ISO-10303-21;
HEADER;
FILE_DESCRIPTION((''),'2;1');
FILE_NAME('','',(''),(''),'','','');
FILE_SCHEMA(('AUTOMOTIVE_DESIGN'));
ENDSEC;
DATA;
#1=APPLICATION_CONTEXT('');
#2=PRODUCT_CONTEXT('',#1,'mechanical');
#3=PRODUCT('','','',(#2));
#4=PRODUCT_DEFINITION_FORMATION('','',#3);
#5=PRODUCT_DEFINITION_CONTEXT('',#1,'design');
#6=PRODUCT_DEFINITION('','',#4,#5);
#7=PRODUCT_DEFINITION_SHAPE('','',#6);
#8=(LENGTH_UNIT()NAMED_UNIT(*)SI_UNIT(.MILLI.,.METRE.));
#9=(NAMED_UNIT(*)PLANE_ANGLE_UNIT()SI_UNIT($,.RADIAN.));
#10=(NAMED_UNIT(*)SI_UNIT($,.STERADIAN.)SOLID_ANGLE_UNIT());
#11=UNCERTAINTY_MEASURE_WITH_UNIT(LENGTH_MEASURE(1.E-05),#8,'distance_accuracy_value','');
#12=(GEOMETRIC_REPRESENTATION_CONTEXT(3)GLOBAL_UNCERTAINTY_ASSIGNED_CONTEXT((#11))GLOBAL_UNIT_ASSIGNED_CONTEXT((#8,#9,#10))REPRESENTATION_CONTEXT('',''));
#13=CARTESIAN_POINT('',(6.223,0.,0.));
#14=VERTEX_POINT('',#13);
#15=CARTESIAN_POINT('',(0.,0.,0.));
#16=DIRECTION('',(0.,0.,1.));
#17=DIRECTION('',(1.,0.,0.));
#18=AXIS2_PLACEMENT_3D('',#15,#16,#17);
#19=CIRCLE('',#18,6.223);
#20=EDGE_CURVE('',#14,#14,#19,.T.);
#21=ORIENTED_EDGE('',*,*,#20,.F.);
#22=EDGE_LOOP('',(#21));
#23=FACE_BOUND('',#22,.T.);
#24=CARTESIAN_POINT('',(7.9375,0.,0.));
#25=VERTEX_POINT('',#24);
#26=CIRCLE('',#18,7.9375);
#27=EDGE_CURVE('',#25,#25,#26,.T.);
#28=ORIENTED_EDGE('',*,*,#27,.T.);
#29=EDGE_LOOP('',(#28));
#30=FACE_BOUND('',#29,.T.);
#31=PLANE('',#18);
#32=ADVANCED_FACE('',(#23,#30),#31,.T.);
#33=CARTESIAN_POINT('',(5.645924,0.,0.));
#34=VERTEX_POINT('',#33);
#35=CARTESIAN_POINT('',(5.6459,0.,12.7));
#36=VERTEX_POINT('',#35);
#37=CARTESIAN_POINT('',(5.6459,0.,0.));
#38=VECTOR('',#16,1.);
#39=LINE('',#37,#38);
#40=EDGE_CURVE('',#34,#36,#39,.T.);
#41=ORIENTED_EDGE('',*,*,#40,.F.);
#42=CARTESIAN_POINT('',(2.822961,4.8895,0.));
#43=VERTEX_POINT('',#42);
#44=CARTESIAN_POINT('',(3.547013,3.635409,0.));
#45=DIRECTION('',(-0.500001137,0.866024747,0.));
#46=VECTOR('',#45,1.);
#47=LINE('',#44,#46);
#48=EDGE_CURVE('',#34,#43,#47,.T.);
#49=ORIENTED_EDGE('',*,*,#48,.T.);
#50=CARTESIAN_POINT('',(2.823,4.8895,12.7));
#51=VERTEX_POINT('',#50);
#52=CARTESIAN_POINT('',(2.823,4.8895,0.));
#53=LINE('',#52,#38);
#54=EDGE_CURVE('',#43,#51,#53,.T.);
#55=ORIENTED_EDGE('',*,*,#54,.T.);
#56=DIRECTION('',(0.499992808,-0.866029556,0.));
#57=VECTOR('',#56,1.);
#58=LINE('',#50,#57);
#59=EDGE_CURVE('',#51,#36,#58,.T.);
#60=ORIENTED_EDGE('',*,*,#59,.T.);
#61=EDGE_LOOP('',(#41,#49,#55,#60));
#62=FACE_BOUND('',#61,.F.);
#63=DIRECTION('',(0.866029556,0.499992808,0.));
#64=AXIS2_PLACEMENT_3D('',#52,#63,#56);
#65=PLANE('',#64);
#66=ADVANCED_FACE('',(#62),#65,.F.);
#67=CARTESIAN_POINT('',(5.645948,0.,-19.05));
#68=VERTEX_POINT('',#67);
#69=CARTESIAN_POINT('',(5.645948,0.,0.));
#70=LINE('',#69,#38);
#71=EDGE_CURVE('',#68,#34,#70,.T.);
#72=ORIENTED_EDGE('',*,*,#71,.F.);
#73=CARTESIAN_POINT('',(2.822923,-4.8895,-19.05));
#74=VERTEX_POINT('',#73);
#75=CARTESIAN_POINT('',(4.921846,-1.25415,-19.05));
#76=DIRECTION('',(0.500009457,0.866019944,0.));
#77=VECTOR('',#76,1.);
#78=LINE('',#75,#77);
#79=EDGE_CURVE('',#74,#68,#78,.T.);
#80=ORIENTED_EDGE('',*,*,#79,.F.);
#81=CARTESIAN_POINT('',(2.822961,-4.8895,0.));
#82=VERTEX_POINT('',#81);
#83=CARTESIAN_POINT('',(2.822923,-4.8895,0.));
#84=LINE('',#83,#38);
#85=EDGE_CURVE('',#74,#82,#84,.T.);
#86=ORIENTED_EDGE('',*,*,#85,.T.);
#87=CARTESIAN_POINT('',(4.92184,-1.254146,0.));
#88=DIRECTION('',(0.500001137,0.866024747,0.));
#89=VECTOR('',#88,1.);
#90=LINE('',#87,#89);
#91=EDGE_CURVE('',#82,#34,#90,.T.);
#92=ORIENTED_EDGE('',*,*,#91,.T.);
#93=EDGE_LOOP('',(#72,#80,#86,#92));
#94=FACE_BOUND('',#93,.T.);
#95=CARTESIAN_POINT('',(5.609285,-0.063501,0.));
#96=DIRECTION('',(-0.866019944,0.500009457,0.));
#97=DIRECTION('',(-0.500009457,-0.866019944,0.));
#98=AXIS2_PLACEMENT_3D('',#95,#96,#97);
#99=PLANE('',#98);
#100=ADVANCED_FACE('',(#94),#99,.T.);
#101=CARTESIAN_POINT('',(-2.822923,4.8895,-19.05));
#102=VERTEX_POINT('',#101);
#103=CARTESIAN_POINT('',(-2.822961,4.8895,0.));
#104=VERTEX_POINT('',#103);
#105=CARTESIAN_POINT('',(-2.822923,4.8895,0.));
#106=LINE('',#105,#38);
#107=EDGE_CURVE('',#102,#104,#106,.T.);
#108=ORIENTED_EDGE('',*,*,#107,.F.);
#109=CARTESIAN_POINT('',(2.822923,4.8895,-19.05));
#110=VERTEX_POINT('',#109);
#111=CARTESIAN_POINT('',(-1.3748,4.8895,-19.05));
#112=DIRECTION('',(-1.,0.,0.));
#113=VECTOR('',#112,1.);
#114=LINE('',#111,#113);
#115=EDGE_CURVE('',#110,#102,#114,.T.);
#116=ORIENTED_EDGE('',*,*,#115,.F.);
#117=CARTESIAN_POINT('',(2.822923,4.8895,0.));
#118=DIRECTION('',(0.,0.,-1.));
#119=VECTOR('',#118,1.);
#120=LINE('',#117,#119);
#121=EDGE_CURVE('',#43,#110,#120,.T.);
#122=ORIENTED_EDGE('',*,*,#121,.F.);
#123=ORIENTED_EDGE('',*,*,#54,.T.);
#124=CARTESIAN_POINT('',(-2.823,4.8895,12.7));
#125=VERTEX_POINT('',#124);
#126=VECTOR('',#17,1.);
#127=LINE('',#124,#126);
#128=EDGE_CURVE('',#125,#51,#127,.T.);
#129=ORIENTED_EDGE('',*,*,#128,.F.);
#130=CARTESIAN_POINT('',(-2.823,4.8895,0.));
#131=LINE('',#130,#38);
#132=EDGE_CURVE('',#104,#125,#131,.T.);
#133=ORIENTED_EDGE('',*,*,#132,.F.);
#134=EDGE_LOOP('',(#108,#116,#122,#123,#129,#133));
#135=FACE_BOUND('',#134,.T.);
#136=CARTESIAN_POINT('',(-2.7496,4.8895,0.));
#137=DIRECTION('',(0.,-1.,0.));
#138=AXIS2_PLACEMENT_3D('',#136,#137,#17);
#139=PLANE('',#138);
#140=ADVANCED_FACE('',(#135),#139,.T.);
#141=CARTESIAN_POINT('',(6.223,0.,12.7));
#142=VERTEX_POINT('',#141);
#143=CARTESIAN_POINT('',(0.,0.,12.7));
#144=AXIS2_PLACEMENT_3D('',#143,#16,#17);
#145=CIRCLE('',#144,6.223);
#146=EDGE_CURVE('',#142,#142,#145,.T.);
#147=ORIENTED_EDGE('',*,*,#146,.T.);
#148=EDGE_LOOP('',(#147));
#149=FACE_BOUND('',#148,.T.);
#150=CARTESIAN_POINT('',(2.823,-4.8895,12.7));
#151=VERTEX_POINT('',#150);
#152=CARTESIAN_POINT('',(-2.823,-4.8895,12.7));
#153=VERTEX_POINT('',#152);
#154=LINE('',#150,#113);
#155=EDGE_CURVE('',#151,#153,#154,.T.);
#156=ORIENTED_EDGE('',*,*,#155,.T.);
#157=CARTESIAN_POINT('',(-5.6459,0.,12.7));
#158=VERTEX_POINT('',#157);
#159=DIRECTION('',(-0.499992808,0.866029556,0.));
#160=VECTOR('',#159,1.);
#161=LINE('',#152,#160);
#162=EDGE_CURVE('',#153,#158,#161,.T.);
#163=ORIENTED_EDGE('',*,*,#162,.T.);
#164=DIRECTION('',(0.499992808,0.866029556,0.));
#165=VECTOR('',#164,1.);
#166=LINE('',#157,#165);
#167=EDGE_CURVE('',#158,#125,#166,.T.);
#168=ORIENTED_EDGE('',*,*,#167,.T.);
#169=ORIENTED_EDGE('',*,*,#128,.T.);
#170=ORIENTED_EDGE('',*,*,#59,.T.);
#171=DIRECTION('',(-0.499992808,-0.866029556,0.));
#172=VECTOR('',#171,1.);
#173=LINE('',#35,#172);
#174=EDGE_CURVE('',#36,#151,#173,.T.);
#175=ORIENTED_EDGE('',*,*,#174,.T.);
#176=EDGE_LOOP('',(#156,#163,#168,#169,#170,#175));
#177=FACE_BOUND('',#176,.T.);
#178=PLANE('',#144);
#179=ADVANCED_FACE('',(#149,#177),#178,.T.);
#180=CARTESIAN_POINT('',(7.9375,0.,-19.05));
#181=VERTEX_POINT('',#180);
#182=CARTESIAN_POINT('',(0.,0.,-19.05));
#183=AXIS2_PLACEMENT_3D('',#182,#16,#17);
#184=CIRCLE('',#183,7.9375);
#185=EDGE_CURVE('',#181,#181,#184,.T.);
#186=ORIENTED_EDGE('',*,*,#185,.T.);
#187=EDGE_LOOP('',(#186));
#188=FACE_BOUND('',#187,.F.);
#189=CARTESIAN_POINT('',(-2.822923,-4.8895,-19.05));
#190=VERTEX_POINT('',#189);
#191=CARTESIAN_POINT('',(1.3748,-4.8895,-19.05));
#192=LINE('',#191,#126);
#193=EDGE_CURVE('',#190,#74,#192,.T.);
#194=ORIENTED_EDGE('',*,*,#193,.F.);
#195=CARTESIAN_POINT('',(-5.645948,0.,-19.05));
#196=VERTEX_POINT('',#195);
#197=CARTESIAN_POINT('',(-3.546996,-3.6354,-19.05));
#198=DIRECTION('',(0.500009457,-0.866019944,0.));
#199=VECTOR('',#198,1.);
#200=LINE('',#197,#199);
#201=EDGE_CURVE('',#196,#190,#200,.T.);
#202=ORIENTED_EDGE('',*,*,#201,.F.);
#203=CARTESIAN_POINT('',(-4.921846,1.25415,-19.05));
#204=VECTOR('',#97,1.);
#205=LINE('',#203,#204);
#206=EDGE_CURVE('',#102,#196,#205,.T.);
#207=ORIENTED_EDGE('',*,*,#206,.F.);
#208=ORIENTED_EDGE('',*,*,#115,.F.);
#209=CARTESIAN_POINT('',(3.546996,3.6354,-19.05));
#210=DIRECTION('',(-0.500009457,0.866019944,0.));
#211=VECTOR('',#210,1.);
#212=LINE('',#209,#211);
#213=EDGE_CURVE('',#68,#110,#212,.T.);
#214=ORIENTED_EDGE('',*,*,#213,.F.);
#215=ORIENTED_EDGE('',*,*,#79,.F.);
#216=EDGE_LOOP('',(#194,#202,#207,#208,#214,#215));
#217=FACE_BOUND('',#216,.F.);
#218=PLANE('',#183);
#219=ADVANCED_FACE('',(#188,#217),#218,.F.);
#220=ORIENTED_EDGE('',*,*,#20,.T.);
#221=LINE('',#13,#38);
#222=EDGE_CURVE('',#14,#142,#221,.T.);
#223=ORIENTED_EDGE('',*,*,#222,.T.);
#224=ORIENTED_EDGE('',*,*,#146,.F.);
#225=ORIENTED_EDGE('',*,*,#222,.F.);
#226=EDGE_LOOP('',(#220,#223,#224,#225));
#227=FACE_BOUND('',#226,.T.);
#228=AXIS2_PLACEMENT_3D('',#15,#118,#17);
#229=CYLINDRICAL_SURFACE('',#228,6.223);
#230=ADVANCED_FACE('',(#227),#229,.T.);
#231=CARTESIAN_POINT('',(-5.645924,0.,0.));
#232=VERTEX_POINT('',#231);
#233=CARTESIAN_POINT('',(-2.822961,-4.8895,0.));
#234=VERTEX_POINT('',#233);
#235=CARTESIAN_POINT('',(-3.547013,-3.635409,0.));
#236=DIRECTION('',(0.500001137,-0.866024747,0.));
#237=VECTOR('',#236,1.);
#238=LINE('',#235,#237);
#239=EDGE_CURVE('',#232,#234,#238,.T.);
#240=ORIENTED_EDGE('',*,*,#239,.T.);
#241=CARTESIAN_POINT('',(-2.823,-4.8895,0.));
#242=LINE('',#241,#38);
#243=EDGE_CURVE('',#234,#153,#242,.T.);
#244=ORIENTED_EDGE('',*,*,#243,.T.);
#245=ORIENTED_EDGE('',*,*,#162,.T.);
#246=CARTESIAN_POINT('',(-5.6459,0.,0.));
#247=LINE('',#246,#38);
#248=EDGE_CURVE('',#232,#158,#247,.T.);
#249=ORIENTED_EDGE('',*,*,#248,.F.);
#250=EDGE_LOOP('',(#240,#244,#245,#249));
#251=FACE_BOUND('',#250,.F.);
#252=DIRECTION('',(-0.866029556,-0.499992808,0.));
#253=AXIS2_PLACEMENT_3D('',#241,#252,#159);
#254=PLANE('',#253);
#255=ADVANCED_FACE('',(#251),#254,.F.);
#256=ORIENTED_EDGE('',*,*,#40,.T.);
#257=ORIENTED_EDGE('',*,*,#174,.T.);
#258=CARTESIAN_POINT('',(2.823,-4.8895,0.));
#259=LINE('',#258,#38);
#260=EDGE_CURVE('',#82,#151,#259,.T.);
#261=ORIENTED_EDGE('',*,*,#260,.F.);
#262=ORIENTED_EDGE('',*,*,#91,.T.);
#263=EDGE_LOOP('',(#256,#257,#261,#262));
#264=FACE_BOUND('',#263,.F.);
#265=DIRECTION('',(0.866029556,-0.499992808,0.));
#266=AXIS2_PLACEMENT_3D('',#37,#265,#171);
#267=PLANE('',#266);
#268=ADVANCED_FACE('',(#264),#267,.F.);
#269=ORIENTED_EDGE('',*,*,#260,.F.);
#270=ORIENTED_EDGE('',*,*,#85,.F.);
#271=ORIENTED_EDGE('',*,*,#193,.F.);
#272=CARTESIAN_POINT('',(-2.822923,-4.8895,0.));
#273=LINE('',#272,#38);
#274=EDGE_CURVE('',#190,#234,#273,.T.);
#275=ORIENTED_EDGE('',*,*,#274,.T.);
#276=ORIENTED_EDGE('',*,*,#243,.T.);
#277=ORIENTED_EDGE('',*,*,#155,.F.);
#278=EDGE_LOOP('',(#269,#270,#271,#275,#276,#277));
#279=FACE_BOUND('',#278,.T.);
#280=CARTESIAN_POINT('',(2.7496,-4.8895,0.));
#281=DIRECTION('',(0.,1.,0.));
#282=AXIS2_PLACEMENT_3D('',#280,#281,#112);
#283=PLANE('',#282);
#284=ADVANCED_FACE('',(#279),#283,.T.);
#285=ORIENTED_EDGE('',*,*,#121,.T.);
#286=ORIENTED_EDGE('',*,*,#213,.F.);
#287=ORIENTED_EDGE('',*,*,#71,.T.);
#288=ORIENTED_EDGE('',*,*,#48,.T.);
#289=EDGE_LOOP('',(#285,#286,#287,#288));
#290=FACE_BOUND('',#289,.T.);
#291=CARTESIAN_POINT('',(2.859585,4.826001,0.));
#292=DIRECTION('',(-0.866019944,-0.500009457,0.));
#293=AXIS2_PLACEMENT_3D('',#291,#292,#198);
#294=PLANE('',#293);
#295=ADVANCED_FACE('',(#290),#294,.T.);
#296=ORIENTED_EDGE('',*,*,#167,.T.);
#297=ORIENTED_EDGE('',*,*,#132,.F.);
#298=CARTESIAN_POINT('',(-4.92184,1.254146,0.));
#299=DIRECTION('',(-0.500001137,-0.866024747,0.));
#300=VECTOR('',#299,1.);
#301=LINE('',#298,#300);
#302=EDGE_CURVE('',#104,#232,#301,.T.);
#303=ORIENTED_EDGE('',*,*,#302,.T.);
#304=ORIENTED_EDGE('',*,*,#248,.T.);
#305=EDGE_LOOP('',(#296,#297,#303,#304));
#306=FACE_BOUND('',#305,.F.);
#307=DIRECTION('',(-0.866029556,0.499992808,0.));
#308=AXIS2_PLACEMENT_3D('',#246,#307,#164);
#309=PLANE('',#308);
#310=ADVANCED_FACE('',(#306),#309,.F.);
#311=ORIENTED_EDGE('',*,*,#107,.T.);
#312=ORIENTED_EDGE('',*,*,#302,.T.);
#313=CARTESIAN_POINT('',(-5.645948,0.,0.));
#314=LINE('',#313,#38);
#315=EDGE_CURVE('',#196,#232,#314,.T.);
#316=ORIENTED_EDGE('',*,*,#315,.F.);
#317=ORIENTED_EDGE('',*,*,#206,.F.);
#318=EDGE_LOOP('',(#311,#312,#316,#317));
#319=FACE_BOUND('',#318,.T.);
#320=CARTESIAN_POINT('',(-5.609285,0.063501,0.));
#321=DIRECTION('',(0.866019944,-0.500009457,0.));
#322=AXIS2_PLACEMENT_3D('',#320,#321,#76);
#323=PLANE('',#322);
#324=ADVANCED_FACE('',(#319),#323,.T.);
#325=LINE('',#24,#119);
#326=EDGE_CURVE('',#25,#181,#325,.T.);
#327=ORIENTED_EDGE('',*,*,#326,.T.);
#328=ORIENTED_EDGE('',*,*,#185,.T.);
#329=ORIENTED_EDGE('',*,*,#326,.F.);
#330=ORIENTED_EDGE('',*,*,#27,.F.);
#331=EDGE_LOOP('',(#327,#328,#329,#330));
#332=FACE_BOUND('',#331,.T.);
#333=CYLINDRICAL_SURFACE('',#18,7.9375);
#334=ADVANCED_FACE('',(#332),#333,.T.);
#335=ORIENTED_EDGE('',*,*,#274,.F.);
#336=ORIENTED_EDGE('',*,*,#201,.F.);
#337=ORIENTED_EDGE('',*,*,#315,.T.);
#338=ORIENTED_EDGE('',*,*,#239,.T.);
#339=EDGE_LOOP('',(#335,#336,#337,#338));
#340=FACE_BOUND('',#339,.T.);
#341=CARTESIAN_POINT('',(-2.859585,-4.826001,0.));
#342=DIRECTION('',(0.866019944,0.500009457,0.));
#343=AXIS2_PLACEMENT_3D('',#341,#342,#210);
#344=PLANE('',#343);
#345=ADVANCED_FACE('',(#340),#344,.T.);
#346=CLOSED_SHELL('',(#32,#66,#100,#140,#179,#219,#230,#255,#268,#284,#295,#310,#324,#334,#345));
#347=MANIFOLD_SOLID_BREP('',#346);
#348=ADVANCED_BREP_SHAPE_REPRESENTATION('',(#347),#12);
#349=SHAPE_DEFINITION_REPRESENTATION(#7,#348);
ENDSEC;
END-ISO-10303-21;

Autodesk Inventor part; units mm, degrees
ref_plane "YZ Plane" through (0, 0, 0) normal (1, 0, 0) x (0, 1, 0)
ref_plane "XZ Plane" through (0, 0, 0) normal (0, 1, 0) x (-1, 0, 0)
ref_plane "XY Plane" through (0, 0, 0) normal (0, 0, 1) x (1, 0, 0)
sketch "Sketch1" plane through (0, 0, 0) normal (0, 0, 1) x (1, 0, 0)
  line L0 (2.7496, 4.7625) -> (5.4993, 0)
  line L1 (5.4993, 0) -> (2.7496, -4.7625)
  line L2 (2.7496, -4.7625) -> (-2.7496, -4.7625)
  line L3 (-2.7496, -4.7625) -> (-5.4993, 0)
  line L4 (-5.4993, 0) -> (-2.7496, 4.7625)
  line L5 (-2.7496, 4.7625) -> (2.7496, 4.7625)
  circle A0 centre (0, 0) radius 7.9375
  circle A1 centre (0, 0) radius 5.4993 construction
  dimension "d0" = 9.525
  dimension "d2" = 15.875
  dimension "d3" = 2.4382
extrude "Extrusion1" add sketch "Sketch1" against normal blind 19.05
thicken "Thicken Hex" operation add thickness 0.127 both sides no extend neighbours yes toward (-0.8660254, 0.5, 0) faces at (-4.5827, 1.5875, -6.35) (-3.6662, -3.175, -6.35) (0.9165, -4.7625, -6.35) (-0.9165, 4.7625, -6.35) (3.6662, 3.175, -6.35) (4.5827, -1.5875, -6.35)
sketch "Sketch3" plane through (0, 0, 0) normal (0, 0, 1) x (1, 0, 0)
  line L0 (5.6459, 0) -> (2.823, -4.8895)
  line L1 (2.823, -4.8895) -> (-2.823, -4.8895)
  line L2 (-2.823, -4.8895) -> (-5.6459, 0)
  line L3 (-5.6459, 0) -> (-2.823, 4.8895)
  line L4 (-2.823, 4.8895) -> (2.823, 4.8895)
  line L5 (2.823, 4.8895) -> (5.6459, 0)
  line L6 (2.823, 4.8895) -> (5.6459, 0) projected
  circle A0 centre (0, 0) radius 6.35
  dimension "d10" = 12.7
extrude "Extrusion2" add sketch "Sketch3" along normal blind 12.7
thicken "Thicken2" operation add thickness 0.127 both sides no extend neighbours yes toward (-0.9967573, 0.0804666, 0) faces at (6.3294, -0.511, 8.4667)
equation "\"d0\" = hexSize"
equation "\"d2\" = exteriorDiameter"
equation "\"d4\" = length"
equation "\"d6\" = printSpacing"
equation "\"d7\" = printSpacing"
equation "\"d10\" = baseBushingDiameter"
equation "\"d8\" = baseBushingLength"
equation "\"d11\" = printSpacing"
equation "\"d12\" = printSpacing"
equation "\"hexSize\" = 9.525"
equation "\"exteriorDiameter\" = 15.875"
equation "\"length\" = 19.05"
equation "\"printSpacing\" = 0.127"
equation "\"baseBushingDiameter\" = 12.7"
equation "\"baseBushingLength\" = 12.7"
properties part number "3_8x5_8x3_4-hexBearingEndCap" material "PC/ABS Plastic"
